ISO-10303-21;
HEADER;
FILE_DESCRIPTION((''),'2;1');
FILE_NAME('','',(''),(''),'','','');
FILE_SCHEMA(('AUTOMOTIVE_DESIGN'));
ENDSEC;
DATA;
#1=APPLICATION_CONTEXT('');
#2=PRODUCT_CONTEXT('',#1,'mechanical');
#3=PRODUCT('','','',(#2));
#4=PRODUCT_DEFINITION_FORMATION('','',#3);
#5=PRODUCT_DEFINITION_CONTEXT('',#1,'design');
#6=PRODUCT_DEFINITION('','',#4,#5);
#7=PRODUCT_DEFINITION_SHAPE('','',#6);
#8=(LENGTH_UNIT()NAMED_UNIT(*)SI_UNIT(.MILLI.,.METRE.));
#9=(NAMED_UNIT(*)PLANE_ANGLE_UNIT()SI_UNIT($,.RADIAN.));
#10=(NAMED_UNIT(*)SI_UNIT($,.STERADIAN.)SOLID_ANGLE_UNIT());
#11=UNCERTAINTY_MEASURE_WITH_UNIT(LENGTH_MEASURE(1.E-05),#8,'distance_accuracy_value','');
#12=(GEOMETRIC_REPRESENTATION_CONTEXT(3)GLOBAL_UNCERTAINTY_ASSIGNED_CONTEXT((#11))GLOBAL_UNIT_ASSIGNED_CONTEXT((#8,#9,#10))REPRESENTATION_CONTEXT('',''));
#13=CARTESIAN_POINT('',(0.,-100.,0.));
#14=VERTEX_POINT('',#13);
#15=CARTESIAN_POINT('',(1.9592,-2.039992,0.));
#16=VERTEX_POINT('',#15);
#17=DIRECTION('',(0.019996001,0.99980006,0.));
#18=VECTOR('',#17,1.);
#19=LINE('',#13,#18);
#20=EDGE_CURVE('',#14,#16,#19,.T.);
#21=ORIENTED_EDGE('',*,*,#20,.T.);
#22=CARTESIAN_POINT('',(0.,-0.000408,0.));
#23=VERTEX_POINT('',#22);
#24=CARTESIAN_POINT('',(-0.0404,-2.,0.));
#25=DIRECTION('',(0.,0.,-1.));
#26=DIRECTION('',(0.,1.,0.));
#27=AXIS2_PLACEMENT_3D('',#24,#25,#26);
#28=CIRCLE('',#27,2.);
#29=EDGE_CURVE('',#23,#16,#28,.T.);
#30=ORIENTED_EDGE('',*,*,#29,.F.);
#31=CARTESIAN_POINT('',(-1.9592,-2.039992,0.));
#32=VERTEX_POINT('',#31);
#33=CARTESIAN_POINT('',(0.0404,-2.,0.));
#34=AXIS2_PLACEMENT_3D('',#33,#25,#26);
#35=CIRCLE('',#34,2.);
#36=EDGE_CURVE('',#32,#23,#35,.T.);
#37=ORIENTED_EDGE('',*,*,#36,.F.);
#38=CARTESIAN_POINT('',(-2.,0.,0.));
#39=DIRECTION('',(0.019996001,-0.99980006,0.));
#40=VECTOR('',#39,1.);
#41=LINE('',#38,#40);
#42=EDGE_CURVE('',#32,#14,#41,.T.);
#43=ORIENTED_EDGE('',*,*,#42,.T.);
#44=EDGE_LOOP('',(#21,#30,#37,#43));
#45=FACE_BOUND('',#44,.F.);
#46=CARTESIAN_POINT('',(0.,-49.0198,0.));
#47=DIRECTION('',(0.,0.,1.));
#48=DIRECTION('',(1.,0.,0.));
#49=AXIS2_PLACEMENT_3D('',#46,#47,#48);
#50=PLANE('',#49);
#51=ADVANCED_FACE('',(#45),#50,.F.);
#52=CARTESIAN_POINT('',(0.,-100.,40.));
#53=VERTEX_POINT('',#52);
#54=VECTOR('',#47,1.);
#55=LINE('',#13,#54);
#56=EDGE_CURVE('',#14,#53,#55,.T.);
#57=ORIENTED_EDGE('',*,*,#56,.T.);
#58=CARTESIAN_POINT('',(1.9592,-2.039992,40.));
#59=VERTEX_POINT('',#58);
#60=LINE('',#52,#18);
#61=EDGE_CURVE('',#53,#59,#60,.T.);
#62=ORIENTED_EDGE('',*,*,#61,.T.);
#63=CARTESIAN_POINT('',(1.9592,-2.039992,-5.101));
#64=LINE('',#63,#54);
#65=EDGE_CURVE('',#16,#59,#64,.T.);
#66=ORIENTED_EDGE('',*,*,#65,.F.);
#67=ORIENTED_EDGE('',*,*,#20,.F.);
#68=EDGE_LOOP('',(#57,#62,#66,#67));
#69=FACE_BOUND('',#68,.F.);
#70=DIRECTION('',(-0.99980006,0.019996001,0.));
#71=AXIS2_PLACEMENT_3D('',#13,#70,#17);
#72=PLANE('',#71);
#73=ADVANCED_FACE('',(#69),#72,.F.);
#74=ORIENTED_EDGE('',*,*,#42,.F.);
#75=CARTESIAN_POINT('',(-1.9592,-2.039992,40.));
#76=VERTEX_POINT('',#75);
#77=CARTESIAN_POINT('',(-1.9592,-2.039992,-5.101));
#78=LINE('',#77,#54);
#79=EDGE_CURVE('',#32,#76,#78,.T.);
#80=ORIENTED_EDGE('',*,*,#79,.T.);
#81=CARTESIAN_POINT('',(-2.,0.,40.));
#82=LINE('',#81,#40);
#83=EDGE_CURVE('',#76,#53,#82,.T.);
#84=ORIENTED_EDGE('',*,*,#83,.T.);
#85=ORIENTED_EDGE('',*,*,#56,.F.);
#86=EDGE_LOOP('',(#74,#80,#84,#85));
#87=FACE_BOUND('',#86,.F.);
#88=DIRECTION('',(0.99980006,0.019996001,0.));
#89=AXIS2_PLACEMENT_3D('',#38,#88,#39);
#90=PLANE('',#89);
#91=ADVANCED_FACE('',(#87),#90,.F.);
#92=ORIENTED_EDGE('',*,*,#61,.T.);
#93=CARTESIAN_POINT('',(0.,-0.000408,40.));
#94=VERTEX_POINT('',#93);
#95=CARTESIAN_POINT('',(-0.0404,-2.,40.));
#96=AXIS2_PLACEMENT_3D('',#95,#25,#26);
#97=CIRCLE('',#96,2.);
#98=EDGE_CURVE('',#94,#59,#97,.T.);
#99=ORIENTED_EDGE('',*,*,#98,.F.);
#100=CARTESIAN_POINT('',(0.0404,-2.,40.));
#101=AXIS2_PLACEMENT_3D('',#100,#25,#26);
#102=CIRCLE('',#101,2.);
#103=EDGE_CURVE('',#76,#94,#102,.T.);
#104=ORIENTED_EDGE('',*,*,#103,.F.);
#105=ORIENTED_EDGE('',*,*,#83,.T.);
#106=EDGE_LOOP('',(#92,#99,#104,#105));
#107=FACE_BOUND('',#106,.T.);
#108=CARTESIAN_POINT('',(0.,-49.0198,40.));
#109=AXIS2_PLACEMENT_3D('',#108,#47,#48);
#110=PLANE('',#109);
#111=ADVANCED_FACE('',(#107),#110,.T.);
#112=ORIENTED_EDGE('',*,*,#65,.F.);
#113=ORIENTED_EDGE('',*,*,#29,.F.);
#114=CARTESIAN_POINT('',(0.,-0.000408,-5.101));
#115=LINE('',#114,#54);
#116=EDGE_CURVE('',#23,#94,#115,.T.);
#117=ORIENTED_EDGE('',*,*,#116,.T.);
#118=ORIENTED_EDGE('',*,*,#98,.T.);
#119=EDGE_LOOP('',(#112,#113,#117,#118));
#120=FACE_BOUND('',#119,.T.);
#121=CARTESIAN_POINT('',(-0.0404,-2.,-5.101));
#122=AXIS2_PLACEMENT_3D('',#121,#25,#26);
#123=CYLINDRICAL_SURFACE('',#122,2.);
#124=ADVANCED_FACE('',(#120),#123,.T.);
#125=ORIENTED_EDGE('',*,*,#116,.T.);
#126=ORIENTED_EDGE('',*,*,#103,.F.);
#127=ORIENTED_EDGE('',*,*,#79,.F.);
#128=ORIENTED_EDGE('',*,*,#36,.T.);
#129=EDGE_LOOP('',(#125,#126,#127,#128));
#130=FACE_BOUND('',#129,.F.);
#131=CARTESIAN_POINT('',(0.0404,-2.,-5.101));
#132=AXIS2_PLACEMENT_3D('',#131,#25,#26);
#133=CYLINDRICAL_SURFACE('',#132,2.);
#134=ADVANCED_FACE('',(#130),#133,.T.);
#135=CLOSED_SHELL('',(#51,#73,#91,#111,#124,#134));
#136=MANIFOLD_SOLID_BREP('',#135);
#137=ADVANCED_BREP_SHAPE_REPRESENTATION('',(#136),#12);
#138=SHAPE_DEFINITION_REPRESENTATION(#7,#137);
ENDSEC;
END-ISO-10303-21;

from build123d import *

# Parameters (mm, degrees)
F1_DEPTH    = 40
F2_T1_DEPTH = 50.2019998


# Not quite as in the source:
# - a fillet or chamfer that OpenCascade refuses, or shapes differently, is made with other operations: its cross-section is extruded or revolved along the edge and cut away or added


with BuildPart() as f1:
    # F0 (on Top) → F1 (new body)
    with BuildSketch(Plane.XY):
        Polygon((2, 0), (0, 0), (-2, 0), (0, -100), align=None)
    extrude(amount=F1_DEPTH)

    # F2: fillet of radius 2 on 2 edges, made by hand

    # F2_s2 → F2_t1 (cut)
    with BuildSketch(Plane.XY.offset(-5.1009999)):
        with BuildLine():
            ThreePointArc((0.04039996, 0), (-1.387882926, -0.5999971437), (-1.95920016, -2.0399920024))
            Line((-1.95920016, -2.0399920024), (-2, 0))
            Line((-2, 0), (0.04039996, 0))
        make_face()
        with BuildLine():
            ThreePointArc((-0.04039996, 0), (1.387882926, -0.5999971437), (1.95920016, -2.0399920024))
            Line((1.95920016, -2.0399920024), (2, 0))
            Line((2, 0), (-0.04039996, 0))
        make_face()
    extrude(amount=F2_T1_DEPTH, mode=Mode.SUBTRACT)


solid = f1.part
